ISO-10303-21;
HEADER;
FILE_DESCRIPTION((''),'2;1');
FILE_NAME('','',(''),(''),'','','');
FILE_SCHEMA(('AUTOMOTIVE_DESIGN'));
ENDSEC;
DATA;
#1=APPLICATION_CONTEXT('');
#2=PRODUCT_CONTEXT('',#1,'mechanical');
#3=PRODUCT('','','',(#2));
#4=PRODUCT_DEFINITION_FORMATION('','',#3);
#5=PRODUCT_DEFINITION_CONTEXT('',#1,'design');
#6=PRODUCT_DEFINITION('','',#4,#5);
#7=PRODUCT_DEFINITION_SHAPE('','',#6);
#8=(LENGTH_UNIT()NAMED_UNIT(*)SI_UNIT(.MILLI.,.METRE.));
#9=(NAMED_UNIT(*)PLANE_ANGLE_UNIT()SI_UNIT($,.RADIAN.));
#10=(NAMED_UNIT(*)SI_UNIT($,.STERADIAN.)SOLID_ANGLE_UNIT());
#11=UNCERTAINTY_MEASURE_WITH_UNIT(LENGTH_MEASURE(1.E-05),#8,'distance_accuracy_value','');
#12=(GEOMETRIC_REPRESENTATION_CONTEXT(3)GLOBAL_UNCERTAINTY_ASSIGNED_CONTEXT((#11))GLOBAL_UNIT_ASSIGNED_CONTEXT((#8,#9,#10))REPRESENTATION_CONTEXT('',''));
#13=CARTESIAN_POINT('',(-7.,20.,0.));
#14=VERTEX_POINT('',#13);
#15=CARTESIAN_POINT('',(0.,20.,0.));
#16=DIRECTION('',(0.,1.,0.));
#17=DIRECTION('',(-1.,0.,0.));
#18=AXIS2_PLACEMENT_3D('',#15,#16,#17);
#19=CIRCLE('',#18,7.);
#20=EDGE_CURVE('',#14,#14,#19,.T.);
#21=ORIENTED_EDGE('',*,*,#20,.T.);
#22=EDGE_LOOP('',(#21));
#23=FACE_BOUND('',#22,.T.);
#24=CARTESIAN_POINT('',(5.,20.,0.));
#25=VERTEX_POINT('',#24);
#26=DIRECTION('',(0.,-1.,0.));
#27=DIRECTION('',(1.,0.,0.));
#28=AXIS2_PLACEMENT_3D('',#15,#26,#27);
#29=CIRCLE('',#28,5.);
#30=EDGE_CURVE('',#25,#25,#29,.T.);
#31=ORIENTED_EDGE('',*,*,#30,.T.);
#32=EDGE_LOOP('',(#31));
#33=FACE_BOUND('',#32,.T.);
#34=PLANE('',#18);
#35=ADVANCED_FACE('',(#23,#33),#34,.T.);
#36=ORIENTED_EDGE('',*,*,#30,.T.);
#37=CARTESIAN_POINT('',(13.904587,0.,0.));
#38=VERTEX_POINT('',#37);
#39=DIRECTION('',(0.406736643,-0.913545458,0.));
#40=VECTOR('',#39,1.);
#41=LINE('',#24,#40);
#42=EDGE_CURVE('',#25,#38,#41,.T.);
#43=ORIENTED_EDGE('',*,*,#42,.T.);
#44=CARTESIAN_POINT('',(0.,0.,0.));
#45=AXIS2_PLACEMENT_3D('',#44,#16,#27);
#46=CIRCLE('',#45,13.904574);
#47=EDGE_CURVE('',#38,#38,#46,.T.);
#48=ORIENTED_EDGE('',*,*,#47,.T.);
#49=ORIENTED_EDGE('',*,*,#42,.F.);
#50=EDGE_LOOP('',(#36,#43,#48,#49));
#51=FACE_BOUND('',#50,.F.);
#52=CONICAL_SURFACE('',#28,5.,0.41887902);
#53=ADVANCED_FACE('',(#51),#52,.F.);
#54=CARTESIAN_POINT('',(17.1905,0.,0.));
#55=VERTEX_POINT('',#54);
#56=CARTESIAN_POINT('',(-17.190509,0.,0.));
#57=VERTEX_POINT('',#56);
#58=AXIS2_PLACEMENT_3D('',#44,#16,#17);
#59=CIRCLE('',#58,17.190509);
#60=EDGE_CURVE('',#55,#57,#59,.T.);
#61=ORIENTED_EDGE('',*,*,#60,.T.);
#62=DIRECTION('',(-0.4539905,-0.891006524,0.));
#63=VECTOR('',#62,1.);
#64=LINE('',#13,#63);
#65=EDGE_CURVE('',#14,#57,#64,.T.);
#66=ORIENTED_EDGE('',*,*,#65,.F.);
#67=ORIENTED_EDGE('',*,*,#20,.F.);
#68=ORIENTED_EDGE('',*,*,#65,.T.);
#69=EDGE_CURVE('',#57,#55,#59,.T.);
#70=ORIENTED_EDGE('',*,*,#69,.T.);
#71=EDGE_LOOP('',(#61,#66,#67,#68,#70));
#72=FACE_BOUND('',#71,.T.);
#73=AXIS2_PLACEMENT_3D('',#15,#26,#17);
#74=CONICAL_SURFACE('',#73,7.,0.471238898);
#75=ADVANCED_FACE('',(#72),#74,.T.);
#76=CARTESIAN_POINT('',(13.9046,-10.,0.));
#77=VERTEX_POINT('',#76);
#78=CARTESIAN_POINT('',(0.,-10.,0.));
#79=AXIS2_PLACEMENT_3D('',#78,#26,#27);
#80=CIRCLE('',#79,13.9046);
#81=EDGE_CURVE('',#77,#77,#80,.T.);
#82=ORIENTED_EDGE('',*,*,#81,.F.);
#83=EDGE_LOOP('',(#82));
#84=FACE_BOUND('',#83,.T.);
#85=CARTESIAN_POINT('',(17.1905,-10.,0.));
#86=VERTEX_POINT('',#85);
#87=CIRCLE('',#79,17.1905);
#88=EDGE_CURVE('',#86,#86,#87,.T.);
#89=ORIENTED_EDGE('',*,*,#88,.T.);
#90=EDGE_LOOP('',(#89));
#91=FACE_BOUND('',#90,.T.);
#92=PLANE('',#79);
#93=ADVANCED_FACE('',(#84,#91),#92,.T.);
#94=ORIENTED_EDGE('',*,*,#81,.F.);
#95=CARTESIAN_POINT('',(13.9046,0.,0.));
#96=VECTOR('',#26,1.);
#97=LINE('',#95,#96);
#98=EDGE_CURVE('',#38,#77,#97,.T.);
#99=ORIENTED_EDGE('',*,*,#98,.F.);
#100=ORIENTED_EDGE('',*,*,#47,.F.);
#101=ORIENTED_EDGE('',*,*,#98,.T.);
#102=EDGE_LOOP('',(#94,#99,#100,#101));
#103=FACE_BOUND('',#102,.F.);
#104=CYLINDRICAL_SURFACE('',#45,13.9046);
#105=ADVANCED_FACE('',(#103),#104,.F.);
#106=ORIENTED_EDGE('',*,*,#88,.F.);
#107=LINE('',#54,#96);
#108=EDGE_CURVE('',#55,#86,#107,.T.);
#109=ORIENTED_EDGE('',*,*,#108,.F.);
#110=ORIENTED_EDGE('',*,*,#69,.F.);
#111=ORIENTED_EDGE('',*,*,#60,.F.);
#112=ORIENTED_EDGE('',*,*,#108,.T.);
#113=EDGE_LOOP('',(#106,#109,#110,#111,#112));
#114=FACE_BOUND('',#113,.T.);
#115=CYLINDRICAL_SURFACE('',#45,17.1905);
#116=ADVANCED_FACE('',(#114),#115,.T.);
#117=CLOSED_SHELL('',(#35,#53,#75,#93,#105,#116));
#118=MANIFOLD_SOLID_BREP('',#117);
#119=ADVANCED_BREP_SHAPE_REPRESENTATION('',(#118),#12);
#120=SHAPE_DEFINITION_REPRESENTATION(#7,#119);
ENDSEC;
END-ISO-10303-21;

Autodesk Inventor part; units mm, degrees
ref_plane "YZ Plane" through (0, 0, 0) normal (1, 0, 0) x (0, 1, 0)
ref_plane "XZ Plane" through (0, 0, 0) normal (0, 1, 0) x (-1, 0, 0)
ref_plane "XY Plane" through (0, 0, 0) normal (0, 0, 1) x (1, 0, 0)
sketch "Boceto2" plane through (0, 0, 0) normal (0, 0, 1) x (1, 0, 0)
  line L0 (0, 0) -> (0, 20)
  dimension "d2" = 20
ref_plane "Plano de trabajo1" through (0, 20, 0) normal (0, 1, 0) x (-1, 0, 0)
sketch "Boceto4" plane through (0, 20, 0) normal (0, 1, 0) x (-1, 0, 0)
  circle A0 centre (0, 0) radius 5
  circle A1 centre (0, 0) radius 7
  dimension "d13" = 10
  dimension "d14" = 14
extrude "Extrusión1" add sketch "Boceto4" against normal blind 20 draft 27
sketch "Boceto7" plane through (0, 20, 0) normal (0, 1, 0) x (1, 0, 0)
  circle A0 centre (0, 0) radius 7 projected
  circle A1 centre (0, 0) radius 5
extrude "Extrusión2" cut sketch "Boceto7" against normal blind 20 draft 24 contours A1
sketch "Boceto9" plane through (0, 0, 0) normal (0, -1, 0) x (1, 0, 0)
  circle A0 centre (0, 0) radius 13.9046 projected
  circle A1 centre (0, 0) radius 13.9046
  circle A2 centre (0, 0) radius 17.1905
extrude "Extrusión3" add sketch "Boceto9" along normal blind 10
properties part number "Boquilla"
